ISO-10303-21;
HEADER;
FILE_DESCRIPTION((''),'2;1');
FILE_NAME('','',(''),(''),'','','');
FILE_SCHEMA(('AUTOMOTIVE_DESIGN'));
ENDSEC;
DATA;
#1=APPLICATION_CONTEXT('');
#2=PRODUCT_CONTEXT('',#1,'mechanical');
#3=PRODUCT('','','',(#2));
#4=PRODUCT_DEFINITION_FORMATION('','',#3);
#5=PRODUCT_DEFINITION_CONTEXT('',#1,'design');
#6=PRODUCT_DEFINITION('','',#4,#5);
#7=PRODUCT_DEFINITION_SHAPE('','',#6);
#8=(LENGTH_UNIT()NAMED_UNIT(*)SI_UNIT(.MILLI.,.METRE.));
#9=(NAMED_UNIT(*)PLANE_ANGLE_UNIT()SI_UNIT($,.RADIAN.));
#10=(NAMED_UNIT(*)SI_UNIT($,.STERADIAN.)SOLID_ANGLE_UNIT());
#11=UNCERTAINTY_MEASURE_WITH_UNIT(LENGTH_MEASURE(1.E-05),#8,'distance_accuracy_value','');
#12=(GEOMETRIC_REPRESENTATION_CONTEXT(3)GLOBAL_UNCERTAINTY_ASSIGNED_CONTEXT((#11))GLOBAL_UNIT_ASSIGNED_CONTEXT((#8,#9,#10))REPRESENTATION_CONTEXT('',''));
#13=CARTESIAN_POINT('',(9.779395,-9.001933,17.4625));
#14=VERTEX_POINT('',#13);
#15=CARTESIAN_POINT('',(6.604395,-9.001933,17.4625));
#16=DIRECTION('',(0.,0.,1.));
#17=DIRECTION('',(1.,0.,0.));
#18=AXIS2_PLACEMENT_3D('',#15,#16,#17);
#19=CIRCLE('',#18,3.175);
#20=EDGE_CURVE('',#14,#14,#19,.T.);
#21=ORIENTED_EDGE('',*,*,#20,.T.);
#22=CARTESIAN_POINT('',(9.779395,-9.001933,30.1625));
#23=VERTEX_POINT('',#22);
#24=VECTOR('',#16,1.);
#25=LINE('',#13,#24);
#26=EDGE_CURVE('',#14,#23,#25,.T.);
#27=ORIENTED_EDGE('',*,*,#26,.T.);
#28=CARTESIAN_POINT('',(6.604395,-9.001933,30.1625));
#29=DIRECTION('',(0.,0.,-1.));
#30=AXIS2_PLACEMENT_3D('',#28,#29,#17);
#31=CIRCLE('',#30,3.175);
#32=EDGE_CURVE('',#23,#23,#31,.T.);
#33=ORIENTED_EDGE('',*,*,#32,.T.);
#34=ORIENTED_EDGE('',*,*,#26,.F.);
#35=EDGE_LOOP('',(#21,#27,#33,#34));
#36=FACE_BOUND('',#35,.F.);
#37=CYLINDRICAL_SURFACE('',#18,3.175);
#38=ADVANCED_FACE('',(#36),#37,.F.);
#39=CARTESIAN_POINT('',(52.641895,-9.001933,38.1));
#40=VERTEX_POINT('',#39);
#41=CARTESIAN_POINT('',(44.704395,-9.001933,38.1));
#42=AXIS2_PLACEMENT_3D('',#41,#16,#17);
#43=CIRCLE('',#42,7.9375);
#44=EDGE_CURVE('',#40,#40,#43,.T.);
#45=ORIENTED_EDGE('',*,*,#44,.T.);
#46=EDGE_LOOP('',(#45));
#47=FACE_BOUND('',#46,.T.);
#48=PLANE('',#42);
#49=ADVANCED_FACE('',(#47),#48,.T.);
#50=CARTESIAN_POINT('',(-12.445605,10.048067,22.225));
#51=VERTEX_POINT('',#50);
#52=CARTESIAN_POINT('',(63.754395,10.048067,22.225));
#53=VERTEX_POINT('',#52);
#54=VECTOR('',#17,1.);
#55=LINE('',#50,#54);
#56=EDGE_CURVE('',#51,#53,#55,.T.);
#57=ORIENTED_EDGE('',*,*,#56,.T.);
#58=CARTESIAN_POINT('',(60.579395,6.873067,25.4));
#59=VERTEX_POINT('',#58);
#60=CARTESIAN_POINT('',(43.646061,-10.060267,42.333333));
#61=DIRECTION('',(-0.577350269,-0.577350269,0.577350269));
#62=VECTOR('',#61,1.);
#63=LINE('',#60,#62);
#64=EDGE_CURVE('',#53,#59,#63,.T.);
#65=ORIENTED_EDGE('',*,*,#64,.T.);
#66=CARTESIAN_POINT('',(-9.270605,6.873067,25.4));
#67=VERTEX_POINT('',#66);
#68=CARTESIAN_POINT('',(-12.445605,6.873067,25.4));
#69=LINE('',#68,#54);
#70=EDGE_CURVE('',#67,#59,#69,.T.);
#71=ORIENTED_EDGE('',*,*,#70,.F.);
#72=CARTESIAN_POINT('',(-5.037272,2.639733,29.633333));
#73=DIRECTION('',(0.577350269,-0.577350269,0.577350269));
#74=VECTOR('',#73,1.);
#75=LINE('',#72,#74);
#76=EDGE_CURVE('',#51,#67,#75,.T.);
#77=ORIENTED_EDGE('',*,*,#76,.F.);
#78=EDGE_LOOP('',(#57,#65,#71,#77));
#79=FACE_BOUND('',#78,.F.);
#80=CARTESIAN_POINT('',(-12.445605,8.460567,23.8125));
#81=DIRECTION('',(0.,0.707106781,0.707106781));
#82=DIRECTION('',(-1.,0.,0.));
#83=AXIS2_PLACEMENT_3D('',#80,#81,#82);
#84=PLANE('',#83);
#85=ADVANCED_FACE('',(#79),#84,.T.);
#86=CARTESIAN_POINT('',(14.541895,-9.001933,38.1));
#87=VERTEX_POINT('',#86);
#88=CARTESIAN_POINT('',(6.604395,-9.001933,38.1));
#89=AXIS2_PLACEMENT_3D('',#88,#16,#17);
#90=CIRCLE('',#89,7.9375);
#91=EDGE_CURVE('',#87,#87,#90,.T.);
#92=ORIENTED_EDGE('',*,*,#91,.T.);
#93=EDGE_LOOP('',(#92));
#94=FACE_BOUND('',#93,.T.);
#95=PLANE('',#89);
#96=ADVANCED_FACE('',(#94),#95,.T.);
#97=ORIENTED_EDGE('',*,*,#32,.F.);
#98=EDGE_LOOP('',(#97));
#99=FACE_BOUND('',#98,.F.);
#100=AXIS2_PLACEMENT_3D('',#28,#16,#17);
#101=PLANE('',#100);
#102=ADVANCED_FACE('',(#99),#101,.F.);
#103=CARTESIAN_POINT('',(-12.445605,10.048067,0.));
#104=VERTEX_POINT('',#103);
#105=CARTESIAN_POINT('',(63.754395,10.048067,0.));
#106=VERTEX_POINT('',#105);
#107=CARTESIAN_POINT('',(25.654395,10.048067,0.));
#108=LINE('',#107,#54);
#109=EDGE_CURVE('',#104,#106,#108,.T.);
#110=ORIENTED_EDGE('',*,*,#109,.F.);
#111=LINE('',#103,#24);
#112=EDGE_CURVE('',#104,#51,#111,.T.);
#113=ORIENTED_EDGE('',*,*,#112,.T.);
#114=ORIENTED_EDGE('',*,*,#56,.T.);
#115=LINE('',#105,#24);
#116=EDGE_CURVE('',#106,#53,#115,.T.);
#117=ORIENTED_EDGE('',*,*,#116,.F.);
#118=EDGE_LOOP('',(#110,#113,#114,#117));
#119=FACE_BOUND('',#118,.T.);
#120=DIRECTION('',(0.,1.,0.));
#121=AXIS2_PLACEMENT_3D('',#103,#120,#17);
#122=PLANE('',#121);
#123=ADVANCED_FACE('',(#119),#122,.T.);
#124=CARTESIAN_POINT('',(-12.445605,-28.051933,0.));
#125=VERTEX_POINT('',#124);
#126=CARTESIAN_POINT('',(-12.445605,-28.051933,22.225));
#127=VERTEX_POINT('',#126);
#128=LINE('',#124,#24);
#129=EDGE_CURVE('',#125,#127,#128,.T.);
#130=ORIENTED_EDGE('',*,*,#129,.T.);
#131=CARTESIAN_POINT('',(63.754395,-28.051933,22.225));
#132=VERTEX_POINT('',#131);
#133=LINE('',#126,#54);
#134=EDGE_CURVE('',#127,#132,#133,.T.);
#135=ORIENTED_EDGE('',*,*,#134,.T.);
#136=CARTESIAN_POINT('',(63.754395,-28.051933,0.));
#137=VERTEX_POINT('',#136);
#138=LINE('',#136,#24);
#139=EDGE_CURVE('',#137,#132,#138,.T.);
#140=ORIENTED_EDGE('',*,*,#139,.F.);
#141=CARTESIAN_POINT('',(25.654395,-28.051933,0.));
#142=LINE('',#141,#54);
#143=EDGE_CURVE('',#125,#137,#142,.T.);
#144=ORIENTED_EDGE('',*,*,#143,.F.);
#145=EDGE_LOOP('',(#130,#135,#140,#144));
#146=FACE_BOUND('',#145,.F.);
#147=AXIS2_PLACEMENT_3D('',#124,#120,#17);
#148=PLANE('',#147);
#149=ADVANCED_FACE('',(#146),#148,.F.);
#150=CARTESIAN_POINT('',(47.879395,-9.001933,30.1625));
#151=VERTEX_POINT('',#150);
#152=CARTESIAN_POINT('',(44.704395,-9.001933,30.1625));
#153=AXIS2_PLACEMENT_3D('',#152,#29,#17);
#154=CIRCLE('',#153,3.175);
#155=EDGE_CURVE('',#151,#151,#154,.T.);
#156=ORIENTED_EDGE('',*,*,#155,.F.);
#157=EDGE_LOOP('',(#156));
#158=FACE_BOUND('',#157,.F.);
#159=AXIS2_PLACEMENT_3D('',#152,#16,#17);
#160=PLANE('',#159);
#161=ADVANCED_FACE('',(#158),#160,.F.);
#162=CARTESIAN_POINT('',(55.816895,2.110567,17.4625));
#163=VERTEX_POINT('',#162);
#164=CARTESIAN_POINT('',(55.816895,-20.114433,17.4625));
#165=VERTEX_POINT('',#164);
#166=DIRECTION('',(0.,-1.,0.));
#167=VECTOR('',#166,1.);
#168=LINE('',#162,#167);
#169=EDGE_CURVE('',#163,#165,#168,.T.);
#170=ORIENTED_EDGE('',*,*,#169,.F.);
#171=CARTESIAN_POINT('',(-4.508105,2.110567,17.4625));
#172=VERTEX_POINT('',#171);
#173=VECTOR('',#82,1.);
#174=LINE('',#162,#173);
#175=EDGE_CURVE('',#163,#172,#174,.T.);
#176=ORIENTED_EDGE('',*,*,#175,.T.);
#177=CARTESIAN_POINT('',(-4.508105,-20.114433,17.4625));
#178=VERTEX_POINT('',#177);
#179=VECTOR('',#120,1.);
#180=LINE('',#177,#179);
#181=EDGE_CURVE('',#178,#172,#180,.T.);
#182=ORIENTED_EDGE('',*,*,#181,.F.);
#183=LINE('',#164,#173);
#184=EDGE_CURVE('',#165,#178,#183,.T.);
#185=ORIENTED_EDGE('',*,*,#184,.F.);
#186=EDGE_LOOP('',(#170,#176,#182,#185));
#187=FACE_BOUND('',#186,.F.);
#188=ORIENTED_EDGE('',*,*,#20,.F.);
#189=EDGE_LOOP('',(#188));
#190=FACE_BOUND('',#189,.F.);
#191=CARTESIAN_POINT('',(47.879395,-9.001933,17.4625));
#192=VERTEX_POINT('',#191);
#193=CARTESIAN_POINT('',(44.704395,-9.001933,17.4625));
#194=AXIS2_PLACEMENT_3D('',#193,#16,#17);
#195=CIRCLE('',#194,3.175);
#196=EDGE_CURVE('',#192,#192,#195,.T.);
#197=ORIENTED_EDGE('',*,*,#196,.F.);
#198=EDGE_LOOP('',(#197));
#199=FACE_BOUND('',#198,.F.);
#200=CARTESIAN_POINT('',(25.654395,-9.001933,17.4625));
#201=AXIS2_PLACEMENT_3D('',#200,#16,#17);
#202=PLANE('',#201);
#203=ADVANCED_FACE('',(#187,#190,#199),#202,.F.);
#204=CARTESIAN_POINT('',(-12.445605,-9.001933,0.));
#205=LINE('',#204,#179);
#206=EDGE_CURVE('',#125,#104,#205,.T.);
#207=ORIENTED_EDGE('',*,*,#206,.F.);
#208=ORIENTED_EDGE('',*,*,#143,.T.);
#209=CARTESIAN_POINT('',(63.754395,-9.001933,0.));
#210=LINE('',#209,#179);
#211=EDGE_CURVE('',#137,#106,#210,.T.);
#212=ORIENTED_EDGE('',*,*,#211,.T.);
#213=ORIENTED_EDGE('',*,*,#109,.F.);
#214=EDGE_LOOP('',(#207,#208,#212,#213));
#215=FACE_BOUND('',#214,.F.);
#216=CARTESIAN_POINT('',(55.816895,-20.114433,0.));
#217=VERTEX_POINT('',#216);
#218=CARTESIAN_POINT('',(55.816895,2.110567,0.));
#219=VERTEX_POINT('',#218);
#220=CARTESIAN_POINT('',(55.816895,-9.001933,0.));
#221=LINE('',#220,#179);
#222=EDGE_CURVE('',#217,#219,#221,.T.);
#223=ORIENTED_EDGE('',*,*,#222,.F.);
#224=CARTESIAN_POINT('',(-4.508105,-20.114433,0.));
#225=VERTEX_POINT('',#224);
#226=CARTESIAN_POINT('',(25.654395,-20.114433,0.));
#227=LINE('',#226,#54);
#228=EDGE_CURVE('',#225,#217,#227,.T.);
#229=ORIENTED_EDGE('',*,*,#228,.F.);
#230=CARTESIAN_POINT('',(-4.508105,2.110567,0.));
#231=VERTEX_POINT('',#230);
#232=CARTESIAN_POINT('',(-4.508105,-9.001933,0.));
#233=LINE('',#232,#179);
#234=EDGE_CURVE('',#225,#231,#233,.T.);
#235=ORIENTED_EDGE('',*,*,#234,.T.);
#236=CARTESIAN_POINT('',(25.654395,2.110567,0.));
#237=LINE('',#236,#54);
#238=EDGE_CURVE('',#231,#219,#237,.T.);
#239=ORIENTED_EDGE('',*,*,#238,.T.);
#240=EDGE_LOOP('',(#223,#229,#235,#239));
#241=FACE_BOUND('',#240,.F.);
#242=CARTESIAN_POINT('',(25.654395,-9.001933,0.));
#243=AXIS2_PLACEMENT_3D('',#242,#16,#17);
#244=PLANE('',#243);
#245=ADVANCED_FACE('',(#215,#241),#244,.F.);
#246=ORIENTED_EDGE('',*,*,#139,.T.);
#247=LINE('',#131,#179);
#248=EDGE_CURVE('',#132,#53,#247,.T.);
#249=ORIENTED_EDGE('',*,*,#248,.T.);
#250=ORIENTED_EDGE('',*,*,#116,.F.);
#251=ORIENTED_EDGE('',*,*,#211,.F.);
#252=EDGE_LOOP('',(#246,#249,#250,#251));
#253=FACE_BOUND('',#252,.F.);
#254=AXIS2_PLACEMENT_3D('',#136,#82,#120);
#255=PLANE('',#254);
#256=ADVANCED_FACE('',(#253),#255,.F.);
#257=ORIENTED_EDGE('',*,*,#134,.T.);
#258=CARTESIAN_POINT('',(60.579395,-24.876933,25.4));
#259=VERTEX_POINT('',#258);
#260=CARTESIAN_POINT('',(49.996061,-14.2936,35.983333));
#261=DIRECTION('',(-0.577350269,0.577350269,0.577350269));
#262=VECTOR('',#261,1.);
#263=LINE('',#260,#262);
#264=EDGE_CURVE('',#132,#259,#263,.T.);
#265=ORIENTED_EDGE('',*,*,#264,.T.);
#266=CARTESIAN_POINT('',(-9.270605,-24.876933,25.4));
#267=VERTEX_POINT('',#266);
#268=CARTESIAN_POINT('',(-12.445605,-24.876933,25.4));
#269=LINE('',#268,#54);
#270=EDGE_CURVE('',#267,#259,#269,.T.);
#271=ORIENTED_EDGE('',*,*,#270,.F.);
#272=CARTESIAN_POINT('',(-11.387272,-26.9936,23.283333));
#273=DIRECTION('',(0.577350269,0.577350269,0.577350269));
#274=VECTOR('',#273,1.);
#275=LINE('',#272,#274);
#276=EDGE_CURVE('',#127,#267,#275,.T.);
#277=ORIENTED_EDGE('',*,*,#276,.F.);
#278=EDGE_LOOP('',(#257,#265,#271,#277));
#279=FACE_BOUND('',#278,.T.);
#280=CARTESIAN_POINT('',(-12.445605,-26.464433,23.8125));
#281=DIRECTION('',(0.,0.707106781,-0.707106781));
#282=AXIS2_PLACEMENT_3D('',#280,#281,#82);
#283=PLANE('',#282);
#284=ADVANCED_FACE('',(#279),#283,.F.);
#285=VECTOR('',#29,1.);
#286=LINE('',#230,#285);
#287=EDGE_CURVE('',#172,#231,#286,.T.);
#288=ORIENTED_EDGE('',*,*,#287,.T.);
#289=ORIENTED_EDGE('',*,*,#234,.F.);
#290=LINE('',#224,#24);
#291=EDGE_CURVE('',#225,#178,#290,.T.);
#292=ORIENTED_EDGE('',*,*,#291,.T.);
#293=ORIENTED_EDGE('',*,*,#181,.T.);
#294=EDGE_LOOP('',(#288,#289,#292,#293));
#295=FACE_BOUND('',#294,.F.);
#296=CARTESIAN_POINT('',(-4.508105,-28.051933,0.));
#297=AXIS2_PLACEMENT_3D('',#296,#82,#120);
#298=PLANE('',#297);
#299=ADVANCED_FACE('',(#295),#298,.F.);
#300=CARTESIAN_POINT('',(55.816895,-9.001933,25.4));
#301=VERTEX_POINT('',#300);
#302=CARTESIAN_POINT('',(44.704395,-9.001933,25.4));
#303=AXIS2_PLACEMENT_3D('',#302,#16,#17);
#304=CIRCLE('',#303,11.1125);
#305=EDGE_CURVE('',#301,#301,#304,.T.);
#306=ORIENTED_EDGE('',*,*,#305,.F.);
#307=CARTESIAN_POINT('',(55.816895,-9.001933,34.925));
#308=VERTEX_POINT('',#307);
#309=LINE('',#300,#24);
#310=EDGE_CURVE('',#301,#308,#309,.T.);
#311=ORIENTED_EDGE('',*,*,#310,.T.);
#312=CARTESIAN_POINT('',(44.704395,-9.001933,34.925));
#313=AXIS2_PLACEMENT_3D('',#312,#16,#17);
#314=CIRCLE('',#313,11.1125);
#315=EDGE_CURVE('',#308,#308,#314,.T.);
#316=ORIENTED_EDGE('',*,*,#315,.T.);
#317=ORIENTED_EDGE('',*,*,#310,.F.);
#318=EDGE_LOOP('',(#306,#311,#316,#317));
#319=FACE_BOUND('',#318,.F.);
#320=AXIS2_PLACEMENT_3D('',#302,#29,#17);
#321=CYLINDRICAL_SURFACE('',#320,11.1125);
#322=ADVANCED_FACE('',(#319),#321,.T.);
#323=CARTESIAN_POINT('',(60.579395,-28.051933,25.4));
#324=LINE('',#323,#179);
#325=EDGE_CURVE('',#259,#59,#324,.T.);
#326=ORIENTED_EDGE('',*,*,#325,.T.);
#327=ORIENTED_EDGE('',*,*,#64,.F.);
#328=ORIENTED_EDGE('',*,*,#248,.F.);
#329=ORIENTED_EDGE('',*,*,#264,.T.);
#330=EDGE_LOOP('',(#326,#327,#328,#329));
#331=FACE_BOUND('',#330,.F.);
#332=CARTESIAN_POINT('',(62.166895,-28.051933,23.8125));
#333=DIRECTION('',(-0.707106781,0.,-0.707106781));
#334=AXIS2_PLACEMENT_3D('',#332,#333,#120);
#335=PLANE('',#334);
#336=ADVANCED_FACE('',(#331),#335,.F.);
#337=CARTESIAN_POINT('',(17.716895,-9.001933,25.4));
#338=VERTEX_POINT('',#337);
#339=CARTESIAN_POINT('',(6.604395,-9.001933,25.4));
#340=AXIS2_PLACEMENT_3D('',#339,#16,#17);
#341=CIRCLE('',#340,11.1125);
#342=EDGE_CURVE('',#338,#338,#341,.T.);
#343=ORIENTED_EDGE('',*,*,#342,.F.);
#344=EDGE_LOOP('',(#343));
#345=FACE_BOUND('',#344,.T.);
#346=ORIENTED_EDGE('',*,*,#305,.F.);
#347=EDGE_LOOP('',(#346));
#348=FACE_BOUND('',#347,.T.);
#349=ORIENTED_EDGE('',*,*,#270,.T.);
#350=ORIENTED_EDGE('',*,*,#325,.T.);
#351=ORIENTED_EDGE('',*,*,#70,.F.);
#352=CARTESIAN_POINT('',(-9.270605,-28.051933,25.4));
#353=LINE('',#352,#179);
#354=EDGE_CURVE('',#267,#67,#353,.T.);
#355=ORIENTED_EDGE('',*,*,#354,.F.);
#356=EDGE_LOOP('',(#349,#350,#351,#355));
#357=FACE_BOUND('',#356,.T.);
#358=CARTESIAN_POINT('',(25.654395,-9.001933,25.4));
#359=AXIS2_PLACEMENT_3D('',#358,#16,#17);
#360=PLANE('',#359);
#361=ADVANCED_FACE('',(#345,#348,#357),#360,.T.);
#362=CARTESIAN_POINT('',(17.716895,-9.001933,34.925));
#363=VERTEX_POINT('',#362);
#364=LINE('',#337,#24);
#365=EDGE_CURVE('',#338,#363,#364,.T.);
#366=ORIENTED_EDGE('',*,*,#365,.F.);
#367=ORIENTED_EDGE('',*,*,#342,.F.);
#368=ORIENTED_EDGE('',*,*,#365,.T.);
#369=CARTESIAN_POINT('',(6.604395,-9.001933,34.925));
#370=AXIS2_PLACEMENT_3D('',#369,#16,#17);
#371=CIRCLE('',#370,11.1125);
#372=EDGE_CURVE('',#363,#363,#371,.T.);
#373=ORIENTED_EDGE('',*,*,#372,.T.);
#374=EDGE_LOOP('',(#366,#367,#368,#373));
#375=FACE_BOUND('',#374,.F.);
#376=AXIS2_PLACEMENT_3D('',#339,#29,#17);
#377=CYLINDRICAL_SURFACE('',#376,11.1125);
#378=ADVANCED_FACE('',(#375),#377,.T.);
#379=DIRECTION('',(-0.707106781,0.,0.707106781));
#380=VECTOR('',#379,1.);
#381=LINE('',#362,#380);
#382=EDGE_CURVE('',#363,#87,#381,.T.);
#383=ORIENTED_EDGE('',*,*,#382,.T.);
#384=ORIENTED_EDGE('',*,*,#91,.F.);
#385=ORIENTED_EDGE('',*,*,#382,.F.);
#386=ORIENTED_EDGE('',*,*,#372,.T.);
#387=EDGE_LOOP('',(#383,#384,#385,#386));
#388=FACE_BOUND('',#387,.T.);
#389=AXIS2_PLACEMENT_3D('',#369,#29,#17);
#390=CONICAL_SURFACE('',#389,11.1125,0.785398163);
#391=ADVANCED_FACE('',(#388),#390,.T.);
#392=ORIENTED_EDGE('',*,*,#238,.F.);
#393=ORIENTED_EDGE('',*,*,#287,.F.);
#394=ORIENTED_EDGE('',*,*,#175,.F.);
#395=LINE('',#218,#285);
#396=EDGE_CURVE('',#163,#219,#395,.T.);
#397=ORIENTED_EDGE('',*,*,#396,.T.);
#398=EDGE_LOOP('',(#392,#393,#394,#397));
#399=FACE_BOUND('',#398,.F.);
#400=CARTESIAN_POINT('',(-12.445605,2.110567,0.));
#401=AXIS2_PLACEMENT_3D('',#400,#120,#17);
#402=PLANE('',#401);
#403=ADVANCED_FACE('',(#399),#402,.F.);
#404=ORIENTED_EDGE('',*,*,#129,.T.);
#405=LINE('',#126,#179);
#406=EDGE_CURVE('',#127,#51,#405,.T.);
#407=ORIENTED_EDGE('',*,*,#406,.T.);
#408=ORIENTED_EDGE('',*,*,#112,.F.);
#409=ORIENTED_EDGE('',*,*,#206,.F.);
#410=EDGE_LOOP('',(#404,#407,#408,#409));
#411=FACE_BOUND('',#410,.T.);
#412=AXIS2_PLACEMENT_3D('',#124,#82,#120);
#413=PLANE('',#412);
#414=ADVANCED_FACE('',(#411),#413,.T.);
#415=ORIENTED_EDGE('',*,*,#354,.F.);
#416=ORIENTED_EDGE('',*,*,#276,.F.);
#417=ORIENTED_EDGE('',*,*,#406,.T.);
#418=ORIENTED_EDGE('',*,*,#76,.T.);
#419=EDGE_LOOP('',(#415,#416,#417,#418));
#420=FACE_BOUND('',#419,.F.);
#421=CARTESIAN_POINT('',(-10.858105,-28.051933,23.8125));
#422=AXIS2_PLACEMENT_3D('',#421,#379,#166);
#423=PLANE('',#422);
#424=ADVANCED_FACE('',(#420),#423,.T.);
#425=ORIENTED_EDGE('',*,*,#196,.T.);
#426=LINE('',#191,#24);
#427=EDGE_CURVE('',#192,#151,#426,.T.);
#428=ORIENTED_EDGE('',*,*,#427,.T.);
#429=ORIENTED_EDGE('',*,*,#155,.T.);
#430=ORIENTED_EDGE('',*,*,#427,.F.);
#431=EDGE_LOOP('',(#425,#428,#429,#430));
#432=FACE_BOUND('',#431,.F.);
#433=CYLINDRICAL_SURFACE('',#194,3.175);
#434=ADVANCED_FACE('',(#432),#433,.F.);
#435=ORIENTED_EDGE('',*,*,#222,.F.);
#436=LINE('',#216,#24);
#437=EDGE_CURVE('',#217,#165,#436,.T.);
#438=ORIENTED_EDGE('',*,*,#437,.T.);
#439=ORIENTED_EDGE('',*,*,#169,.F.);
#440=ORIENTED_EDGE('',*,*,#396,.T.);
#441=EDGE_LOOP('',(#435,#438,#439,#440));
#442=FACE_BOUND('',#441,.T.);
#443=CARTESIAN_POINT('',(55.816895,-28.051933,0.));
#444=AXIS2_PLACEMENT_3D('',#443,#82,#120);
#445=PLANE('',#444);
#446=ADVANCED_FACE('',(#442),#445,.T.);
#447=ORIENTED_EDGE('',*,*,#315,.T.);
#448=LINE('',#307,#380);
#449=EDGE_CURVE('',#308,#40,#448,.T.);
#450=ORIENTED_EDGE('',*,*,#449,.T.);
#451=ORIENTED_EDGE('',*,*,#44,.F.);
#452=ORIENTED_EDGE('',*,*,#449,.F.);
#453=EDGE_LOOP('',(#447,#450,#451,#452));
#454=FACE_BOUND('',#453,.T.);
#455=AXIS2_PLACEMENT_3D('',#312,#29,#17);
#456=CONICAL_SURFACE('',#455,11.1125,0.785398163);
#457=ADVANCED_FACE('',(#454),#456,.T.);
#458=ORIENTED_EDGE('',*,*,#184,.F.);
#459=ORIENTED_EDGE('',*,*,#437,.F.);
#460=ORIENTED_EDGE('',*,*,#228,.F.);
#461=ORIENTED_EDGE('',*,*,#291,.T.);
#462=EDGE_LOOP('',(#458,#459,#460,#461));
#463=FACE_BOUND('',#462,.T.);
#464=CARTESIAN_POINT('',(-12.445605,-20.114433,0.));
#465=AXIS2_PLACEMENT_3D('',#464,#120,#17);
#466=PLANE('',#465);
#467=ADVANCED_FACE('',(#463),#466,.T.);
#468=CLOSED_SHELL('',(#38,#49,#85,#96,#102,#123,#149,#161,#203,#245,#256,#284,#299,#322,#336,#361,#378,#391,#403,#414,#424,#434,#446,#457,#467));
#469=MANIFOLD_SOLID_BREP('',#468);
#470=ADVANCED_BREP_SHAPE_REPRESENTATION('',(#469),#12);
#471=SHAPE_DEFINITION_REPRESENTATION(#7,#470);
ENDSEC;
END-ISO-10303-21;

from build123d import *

# Parameters (mm, degrees)
F0_W     = 76.2
F0_H     = 38.1
F1_DEPTH = 25.4
F2_R     = 11.1125
F3_DEPTH = 12.7
F4_SIZE  = 3.175
F5_T     = 7.9375


# Not quite as in the source:
# - a shell that OpenCascade refuses in one call is made with other operations: the cavity is built on its own and cut out


with BuildPart() as f1:
    # F0 (on Top) → F1 (new body)
    with BuildSketch(Plane.XY):
        with Locations((25.6543946505, -9.0019332737)):
            Rectangle(F0_W, F0_H)
    extrude(amount=F1_DEPTH)

    # F2 (on face) → F3 (join)
    with BuildSketch(Plane.XY.offset(25.4)):
        with Locations((6.6043946505, -9.0019332737)):
            Circle(F2_R)
        with Locations((44.7043946505, -9.0019332737)):
            Circle(F2_R)
    extrude(amount=F3_DEPTH)

    # F4
    f4_edges = [f1.edges().sort_by_distance(p)[0] for p in [
        (-4.508105, -9.001933, 38.1),
        (33.591895, -9.001933, 38.1),
        (-12.445605, -9.001933, 25.4),
        (25.654395, 10.048067, 25.4),
        (25.654395, -28.051933, 25.4),
        (63.754395, -9.001933, 25.4),
    ]]
    chamfer(f4_edges, length=F4_SIZE)

    # F5: shell of thickness 7.9375, made by hand


with BuildPart() as f5_core1:
    # F5_t2: copy of F1
    add(f1.part)

    # the walls: a layer under each face that stays
    f5_faces = [f5_core1.faces().sort_by_distance(p)[0] for p in [
        (25.6543946505, -28.0519332737, 11.1125),
        (-12.4456053495, -9.0019332737, 11.1125),
        (25.6543946505, -26.4644332737, 23.8125),
        (63.7543946505, -9.0019332737, 11.1125),
        (25.6543946505, 10.0480667263, 11.1125),
        (-10.8581053495, -9.0019332737, 23.8125),
        (25.6543946505, -9.0019332737, 25.4),
        (62.1668946505, -9.0019332737, 23.8125),
        (25.6543946505, 8.4605667263, 23.8125),
        (33.5918946505, -9.0019332737, 30.1625),
        (-4.5081053495, -9.0019332737, 30.1625),
        (35.1793946505, -9.0019332737, 36.5125),
        (-2.9206053495, -9.0019332737, 36.5125),
        (44.7043946505, -9.0019332737, 38.1),
        (6.6043946505, -9.0019332737, 38.1),
    ]]
    thicken(f5_faces, amount=-F5_T, mode=Mode.SUBTRACT)

    # F5_s3 → F5_t4 (revolve, cut)
    with BuildSketch(Plane.XZ.offset(9.0019332737)):
        Polygon((55.8962696505, 25.479375), (55.8168946505, 17.4625), (47.8793946505, 17.4625), (47.8793946505, 25.4), align=None)
    revolve(axis=Axis((44.7043946505, -9.0019332737, 25.4), (0, 0, 1)), mode=Mode.SUBTRACT)

    # F5_s5 → F5_t6 (revolve, cut)
    with BuildSketch(Plane.XZ.offset(9.0019332737)):
        Polygon((17.7962696505, 25.479375), (17.7168946505, 17.4625), (9.7793946505, 17.4625), (9.7793946505, 25.4), align=None)
    revolve(axis=Axis((6.6043946505, -9.0019332737, 25.4), (0, 0, 1)), mode=Mode.SUBTRACT)


with BuildPart() as f1_1:
    add(f1.part)

    # what is left inside the walls is the cavity
    f5_cavity = [f5_core1.part.solids().sort_by_distance(p)[0] for p in [
        (25.654395, -12.7061, 0.079375),
    ]]
    add(f5_cavity, mode=Mode.SUBTRACT)


solid = f1_1.part
